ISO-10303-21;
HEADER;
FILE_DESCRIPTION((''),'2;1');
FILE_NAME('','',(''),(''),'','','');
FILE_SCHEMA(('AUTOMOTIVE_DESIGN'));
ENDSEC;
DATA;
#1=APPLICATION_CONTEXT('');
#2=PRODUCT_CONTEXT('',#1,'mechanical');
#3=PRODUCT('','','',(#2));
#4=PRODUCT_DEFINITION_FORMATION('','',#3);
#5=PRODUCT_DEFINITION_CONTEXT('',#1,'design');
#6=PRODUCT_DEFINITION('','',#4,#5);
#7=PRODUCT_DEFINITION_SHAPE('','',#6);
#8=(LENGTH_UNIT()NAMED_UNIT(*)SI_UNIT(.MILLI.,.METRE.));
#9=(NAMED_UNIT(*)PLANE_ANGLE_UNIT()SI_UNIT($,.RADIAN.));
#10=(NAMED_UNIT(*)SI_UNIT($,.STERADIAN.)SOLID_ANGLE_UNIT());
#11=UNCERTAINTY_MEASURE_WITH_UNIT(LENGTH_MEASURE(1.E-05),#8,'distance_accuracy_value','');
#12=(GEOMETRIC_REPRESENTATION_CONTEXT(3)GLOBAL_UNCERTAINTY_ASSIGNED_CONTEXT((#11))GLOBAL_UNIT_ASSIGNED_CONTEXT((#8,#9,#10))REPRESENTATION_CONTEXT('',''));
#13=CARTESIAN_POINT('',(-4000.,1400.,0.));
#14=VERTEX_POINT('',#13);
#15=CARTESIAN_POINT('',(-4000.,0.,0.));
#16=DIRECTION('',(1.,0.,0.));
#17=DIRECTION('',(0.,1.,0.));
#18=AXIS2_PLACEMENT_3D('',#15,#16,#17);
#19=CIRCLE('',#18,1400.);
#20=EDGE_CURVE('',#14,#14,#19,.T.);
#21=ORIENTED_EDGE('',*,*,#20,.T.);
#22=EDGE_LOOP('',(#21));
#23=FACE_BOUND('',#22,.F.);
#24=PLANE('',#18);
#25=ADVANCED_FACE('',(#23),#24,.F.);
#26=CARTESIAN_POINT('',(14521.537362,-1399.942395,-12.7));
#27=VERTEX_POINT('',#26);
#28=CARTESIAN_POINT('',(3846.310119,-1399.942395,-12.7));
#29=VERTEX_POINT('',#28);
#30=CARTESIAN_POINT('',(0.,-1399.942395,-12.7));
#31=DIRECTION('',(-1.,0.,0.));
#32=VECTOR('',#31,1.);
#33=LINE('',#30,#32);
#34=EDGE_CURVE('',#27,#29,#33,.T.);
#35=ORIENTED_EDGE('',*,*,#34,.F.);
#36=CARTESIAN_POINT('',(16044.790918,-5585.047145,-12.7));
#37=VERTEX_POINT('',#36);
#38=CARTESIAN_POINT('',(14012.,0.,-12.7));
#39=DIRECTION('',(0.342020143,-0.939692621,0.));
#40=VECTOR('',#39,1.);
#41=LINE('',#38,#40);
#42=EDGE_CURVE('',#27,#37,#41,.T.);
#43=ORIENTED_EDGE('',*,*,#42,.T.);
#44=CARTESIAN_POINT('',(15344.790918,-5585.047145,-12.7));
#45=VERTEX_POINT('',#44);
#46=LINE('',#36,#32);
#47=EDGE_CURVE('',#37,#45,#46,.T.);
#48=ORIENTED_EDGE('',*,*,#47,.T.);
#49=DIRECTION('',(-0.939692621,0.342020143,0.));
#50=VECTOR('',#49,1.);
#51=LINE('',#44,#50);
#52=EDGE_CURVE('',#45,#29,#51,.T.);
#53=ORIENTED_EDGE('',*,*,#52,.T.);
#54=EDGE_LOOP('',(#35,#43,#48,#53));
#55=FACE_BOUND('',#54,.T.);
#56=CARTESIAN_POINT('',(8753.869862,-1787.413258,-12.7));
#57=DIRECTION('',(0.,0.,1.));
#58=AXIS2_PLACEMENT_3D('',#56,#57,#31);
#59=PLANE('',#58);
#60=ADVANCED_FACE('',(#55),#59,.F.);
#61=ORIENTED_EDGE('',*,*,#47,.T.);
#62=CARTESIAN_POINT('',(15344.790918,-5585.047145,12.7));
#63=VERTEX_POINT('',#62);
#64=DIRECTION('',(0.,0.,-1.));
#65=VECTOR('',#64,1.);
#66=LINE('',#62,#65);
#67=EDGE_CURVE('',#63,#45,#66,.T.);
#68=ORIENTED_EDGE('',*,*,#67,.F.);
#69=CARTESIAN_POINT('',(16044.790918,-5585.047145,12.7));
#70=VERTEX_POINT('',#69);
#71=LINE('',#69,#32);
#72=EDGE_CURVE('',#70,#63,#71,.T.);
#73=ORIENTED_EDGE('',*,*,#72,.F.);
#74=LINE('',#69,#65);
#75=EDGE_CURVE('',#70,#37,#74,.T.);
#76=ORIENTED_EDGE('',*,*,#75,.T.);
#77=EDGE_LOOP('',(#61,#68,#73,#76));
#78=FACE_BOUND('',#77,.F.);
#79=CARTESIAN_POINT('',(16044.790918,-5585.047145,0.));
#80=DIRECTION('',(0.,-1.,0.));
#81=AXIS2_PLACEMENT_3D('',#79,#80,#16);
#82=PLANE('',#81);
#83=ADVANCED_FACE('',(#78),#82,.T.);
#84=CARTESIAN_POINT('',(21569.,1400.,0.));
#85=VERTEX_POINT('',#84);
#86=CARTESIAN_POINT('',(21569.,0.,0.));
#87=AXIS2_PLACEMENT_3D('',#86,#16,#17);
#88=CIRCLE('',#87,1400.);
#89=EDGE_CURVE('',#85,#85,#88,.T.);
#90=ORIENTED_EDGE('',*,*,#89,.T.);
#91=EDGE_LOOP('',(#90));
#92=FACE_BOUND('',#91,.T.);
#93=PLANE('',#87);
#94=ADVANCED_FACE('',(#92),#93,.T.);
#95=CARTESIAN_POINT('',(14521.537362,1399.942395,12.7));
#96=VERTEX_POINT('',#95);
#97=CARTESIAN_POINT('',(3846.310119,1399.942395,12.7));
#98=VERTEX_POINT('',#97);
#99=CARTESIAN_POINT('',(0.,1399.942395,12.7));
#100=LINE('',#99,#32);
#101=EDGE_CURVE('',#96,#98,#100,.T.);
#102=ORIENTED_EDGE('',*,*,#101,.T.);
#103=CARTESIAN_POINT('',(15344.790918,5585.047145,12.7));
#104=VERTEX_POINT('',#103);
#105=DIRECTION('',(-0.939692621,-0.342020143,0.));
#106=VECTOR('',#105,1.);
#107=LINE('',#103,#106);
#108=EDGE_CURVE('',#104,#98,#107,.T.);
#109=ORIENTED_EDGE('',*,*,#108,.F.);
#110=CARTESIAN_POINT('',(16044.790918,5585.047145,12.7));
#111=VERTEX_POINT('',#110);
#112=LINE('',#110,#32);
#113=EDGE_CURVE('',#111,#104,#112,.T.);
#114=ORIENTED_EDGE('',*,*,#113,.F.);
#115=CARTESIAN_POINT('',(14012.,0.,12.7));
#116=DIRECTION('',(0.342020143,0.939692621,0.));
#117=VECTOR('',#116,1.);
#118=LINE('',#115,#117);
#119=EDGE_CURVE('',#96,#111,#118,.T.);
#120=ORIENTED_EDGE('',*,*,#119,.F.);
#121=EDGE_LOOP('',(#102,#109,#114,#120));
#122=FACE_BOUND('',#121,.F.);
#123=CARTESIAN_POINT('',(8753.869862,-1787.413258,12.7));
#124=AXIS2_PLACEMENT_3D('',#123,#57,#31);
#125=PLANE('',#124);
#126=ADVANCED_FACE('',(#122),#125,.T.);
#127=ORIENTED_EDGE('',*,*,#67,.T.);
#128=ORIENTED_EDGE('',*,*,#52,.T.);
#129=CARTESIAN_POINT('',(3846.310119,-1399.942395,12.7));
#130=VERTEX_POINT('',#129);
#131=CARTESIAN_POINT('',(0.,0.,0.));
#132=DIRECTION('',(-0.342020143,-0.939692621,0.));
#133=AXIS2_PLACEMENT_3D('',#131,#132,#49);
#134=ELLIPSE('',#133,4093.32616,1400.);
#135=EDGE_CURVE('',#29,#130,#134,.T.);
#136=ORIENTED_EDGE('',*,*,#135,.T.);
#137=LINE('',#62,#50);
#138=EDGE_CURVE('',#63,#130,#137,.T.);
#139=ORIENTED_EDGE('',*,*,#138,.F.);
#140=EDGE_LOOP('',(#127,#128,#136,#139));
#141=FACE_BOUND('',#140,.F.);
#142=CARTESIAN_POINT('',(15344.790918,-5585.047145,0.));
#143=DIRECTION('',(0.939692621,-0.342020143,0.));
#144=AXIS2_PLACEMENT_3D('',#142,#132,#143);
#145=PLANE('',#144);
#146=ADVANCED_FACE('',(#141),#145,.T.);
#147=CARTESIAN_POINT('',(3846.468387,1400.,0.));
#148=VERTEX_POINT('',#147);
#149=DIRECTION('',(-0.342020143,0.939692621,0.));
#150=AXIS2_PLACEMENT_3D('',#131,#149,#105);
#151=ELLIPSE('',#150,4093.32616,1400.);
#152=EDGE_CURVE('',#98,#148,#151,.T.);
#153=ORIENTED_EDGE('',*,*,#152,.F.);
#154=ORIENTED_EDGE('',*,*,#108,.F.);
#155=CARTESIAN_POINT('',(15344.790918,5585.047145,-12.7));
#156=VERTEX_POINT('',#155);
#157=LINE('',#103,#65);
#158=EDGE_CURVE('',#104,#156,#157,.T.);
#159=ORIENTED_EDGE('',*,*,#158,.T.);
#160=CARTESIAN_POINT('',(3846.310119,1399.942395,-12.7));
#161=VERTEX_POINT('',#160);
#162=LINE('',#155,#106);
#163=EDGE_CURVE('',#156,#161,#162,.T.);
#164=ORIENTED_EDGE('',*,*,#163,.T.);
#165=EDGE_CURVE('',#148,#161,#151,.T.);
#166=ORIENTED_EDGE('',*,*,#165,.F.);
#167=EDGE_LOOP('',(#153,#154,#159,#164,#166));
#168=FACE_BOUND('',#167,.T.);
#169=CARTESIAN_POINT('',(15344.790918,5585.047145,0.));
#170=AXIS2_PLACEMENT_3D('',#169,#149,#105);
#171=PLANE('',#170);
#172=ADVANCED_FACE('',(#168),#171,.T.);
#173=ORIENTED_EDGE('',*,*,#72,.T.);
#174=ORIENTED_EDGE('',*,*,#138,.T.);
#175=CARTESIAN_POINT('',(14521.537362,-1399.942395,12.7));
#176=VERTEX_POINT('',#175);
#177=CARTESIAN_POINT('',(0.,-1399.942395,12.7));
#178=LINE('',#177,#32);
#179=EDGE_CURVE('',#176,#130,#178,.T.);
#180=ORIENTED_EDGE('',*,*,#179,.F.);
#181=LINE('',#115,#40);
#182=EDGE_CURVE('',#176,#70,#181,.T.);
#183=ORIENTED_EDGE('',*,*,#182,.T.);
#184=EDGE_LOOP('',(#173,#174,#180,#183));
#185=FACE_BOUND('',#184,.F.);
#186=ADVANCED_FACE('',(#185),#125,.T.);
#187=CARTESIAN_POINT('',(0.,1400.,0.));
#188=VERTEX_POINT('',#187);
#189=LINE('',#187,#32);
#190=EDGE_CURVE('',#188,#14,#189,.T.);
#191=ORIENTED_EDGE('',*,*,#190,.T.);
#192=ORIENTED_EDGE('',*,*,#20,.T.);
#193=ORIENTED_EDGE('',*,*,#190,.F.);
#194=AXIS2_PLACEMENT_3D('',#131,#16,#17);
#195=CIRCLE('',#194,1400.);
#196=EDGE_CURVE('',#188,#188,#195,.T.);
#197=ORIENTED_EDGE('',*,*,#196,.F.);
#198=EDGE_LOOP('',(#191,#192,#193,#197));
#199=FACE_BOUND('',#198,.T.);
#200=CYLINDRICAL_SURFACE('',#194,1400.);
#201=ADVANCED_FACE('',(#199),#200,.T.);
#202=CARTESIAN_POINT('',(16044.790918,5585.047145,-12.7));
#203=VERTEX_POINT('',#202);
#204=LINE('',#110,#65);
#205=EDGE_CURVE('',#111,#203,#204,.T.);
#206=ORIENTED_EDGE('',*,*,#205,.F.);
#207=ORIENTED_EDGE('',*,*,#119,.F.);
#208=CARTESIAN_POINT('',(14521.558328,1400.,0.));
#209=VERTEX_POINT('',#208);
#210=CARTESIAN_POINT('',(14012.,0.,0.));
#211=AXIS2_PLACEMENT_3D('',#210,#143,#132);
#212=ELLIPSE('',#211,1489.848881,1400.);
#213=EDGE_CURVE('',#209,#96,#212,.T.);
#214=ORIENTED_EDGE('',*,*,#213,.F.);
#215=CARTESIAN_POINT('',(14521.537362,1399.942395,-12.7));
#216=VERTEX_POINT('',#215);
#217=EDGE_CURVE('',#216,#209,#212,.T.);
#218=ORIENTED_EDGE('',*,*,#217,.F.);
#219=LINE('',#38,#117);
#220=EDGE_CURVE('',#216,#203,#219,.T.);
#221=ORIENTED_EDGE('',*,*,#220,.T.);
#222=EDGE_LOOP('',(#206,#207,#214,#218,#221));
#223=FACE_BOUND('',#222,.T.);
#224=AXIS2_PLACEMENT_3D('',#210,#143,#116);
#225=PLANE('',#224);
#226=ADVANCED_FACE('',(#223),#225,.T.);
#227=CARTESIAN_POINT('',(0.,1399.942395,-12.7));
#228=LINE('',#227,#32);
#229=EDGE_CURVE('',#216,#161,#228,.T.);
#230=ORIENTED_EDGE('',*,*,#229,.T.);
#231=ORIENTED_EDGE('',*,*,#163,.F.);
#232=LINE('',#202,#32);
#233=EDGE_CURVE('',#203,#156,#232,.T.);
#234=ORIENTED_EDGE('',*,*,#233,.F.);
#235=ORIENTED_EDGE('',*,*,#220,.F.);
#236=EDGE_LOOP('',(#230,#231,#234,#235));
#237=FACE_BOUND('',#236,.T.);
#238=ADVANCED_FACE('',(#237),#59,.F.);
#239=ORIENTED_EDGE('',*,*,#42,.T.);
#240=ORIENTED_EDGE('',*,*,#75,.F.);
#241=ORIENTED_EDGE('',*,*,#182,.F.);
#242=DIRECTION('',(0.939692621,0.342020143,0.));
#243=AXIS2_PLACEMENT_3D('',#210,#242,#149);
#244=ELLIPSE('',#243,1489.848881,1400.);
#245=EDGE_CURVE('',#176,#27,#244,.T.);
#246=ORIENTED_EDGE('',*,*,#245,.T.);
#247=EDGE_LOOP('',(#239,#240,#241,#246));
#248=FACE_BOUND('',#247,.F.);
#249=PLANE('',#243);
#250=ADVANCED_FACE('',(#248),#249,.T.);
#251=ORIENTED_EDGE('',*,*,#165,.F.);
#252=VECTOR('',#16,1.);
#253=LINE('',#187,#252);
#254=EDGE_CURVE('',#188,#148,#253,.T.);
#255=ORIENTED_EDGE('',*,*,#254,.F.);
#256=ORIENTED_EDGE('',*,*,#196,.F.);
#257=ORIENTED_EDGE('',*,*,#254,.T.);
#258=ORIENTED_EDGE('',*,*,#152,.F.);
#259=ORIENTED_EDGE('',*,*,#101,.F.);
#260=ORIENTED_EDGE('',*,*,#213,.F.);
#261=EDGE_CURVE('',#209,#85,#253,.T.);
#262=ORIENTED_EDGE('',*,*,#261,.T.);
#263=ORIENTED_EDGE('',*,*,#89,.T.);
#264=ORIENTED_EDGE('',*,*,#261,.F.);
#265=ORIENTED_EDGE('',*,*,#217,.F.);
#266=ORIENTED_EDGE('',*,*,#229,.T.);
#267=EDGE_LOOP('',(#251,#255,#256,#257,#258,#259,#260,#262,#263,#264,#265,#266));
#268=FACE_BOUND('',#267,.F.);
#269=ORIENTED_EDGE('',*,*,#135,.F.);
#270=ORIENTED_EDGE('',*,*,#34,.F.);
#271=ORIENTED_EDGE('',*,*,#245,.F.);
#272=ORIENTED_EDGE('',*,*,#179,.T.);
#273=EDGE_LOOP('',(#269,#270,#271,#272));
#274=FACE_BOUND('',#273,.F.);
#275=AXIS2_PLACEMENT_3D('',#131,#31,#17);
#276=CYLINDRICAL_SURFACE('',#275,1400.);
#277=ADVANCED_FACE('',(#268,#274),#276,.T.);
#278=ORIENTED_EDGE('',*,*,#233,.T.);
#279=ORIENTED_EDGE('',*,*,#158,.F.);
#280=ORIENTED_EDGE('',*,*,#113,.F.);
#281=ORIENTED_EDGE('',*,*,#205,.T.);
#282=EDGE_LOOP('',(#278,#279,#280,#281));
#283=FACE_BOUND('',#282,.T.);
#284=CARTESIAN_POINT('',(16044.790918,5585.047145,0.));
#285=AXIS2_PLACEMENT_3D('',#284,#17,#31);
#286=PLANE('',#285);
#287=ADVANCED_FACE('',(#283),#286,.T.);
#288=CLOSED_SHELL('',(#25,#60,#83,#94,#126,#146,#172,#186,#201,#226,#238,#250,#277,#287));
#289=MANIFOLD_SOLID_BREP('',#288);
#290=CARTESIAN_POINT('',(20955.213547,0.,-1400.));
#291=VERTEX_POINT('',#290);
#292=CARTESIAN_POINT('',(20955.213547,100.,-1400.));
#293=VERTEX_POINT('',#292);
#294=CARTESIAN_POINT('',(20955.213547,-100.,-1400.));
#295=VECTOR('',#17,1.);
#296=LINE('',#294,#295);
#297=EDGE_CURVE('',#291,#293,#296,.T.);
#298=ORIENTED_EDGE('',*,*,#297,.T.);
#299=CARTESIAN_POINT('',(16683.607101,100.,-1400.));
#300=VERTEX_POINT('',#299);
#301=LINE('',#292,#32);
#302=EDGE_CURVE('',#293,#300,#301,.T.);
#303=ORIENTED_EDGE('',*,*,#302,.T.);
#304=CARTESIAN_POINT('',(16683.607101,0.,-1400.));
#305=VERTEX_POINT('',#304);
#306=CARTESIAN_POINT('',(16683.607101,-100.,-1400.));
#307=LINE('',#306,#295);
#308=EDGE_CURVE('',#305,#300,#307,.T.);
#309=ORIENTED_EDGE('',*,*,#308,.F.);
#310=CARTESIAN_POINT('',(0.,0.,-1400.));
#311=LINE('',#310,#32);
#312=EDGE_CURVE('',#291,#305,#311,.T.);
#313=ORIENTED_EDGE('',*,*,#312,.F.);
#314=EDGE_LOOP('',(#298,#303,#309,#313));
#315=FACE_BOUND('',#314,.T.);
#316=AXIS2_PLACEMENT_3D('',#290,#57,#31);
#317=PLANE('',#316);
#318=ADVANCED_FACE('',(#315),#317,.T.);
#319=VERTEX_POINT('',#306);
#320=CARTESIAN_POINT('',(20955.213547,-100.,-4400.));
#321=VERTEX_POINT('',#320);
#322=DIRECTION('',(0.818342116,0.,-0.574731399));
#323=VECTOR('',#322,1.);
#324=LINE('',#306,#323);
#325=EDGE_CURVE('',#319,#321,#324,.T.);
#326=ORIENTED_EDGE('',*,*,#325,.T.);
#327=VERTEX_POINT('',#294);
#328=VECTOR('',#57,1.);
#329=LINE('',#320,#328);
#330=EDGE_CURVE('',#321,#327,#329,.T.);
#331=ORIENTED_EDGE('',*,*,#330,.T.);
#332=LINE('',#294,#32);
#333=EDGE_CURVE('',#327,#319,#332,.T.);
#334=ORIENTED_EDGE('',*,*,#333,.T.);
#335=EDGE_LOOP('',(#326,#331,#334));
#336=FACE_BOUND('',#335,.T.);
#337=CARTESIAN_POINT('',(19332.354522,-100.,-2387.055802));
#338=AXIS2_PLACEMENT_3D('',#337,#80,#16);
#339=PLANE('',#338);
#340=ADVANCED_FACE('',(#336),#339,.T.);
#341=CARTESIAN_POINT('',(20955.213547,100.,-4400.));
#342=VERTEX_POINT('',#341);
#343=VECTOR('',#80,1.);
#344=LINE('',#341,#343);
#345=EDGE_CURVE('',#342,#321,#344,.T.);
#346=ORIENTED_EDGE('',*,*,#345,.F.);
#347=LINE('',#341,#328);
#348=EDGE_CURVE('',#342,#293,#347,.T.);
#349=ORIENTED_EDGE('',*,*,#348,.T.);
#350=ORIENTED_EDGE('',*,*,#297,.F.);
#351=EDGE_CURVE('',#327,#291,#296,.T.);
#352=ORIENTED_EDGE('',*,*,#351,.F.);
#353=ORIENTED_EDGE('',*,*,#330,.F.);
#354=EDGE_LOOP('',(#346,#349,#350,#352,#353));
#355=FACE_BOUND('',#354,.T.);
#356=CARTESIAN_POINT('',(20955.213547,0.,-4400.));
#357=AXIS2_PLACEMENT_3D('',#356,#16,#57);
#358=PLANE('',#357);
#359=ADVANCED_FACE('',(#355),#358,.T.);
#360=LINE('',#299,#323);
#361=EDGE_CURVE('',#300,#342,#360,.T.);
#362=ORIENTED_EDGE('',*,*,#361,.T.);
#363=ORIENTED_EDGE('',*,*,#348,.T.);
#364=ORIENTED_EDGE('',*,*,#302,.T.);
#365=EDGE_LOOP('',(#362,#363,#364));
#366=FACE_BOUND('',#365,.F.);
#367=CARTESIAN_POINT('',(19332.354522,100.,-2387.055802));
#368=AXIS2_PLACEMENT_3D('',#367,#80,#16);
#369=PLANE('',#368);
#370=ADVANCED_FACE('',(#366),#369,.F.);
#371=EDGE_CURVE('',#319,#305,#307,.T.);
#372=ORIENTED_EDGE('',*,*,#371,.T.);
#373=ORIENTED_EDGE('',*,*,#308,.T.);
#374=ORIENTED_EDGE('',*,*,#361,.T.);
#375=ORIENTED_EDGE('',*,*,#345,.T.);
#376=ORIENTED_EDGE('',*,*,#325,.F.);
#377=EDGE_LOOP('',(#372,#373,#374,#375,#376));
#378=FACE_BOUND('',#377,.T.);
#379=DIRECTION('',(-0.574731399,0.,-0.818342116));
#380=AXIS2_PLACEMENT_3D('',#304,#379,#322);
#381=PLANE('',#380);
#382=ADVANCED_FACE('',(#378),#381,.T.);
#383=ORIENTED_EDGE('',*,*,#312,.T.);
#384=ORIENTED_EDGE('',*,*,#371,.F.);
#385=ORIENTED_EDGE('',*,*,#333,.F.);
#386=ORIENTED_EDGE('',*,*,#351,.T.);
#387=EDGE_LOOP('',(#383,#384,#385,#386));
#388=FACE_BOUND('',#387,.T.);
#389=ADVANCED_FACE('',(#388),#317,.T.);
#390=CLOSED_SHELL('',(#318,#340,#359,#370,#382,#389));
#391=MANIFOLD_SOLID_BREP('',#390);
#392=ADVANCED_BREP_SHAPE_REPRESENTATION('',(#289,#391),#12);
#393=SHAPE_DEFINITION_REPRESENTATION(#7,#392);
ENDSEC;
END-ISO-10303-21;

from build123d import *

# Parameters (mm, degrees)
F1_DEPTH = 12.7
F3_R     = 1400
F4_DEPTH = 21569
F5_DEPTH = 4000
F9_DEPTH = 100


# Not quite as in the source:
# - the program builds the solid bodies; features that only make, move or delete a surface that nothing else refers to are left out


with BuildPart() as f1:
    # F0 (on Top) → F1 (new body, symmetric)
    with BuildSketch(Plane.XY):
        Polygon((15344.7909177956, 5585.047145116), (0, 0), (14012, 0), (16044.7909177956, 5585.047145116), align=None)
    extrude(amount=F1_DEPTH, both=True)

    # F2: F1 across plane


with BuildPart() as f1_1:
    add(f1.part)
    add(f1.part.mirror(Plane.XZ))

    # F3 (on Right) → F4 (join)
    with BuildSketch(Plane.YZ):
        Circle(F3_R)
    extrude(amount=F4_DEPTH)

    # F3 (on Right) → F5 (join)
    with BuildSketch(Plane.YZ):
        Circle(F3_R)
    extrude(amount=-F5_DEPTH)

    # F8 (on Front) → F9 (join, symmetric)
    with BuildSketch(Plane.XZ):
        Polygon((16683.6071014404, -1400), (20955.2135467529, -4400), (20955.2135467529, -1400), align=None)
    extrude(amount=F9_DEPTH, both=True)


solid = f1_1.part
